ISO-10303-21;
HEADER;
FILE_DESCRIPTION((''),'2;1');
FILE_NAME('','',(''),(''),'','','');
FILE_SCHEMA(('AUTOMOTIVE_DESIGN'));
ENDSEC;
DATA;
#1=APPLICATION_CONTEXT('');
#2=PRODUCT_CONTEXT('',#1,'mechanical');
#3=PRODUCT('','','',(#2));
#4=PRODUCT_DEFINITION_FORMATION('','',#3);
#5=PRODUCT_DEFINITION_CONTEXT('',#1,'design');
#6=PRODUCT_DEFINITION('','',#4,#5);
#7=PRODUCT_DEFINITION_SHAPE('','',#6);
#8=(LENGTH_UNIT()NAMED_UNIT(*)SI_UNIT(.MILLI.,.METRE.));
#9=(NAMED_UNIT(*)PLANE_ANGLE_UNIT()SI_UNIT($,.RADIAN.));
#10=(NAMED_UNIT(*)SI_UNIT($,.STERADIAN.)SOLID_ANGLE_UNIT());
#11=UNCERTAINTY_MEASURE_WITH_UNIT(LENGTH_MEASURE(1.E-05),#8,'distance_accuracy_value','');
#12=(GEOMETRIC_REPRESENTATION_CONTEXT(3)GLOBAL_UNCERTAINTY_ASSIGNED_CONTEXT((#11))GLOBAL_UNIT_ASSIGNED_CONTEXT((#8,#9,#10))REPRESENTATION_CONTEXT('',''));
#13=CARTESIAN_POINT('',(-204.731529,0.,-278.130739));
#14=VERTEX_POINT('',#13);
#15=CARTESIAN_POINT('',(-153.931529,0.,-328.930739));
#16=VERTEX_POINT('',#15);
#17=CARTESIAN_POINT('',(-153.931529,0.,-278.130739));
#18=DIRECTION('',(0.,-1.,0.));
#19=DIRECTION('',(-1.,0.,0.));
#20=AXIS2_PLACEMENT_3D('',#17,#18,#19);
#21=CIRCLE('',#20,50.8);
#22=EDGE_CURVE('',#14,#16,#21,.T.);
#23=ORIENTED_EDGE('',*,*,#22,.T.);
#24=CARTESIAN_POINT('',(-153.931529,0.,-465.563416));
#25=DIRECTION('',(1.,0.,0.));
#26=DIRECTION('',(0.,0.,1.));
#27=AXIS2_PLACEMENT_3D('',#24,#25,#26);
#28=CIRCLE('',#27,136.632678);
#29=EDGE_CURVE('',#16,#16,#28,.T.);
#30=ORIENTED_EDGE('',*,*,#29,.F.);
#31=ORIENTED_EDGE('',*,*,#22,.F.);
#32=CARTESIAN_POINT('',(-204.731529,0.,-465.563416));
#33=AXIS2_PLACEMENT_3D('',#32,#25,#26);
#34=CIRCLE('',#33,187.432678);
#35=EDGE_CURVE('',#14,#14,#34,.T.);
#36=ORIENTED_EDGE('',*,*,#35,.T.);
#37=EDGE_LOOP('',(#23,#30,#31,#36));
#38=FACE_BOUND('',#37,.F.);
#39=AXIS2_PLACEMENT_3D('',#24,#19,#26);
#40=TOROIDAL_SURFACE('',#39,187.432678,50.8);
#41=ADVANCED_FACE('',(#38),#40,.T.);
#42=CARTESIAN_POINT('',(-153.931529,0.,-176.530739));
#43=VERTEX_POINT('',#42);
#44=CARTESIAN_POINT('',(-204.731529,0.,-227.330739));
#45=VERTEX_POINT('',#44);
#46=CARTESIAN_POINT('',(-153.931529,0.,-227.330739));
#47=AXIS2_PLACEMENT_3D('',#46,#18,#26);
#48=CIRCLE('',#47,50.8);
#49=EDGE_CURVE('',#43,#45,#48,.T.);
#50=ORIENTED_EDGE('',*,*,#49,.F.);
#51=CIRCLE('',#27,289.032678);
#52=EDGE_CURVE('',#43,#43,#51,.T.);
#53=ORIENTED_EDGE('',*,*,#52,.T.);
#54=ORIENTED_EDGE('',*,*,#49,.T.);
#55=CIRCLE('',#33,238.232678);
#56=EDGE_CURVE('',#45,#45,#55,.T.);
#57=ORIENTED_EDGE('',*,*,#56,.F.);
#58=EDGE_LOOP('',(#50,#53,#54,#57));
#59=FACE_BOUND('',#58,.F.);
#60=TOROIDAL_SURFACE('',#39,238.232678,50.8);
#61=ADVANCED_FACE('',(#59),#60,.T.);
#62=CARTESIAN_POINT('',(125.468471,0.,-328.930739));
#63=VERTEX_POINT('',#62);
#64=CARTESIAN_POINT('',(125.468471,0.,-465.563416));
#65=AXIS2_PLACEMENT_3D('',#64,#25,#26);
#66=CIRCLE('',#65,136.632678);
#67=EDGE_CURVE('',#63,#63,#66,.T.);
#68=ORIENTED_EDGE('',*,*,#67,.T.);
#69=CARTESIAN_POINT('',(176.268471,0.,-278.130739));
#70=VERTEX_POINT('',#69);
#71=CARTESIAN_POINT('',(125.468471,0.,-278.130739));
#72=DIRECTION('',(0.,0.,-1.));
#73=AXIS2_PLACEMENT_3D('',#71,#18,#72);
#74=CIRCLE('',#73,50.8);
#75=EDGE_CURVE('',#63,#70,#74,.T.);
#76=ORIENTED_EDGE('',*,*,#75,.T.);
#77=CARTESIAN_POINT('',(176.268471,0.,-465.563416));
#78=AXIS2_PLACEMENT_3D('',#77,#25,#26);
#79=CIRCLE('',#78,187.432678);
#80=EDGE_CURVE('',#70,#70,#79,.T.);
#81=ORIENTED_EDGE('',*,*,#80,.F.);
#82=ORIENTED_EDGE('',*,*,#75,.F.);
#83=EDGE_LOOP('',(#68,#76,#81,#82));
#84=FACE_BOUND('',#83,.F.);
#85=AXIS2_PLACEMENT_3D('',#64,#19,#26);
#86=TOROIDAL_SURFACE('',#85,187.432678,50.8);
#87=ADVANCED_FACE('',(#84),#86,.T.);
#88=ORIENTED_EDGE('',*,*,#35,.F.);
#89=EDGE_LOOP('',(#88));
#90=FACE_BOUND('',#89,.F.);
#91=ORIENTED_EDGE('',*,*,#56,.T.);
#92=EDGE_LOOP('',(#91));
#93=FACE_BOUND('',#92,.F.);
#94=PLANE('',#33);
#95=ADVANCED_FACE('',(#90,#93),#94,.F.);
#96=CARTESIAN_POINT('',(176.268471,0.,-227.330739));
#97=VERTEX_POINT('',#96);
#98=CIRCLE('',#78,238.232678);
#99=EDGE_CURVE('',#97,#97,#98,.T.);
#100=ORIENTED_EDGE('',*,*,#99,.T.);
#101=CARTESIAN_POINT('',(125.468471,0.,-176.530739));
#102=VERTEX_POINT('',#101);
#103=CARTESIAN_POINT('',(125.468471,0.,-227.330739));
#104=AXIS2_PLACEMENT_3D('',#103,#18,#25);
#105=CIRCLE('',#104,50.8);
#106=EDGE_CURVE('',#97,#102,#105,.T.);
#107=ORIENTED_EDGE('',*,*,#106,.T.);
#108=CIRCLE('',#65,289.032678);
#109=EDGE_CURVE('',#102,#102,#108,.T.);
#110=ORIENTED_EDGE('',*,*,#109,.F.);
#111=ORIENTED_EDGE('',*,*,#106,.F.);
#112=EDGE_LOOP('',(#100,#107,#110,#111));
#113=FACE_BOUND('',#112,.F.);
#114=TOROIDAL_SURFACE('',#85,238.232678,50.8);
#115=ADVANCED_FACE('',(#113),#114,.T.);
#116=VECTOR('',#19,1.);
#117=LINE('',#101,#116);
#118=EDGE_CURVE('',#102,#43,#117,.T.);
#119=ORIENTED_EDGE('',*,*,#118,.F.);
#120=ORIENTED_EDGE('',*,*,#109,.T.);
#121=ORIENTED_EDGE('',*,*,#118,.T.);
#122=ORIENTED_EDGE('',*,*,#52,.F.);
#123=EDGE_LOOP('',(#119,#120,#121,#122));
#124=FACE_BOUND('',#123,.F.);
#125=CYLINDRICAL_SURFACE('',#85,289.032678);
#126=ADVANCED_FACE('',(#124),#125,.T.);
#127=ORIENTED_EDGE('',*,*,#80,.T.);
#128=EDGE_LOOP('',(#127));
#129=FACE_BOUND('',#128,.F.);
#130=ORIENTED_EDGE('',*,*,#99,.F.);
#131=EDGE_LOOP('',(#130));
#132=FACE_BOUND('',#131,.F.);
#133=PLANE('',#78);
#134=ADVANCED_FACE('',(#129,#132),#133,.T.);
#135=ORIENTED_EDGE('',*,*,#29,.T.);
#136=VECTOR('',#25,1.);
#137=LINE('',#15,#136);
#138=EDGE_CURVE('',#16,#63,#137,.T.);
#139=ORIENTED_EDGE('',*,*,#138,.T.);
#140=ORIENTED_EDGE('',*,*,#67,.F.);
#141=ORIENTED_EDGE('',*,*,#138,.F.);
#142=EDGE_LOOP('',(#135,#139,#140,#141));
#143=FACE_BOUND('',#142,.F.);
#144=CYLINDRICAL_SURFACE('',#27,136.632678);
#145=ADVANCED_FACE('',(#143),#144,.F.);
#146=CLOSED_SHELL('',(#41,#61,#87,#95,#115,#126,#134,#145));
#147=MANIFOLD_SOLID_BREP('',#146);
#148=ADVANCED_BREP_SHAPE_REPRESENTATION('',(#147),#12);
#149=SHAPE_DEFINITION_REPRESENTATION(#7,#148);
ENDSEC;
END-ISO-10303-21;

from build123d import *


# Not quite as in the source:
# - the program builds the solid bodies; features that only make, move or delete a surface that nothing else refers to are left out


with BuildPart() as f3:
    # F0 (on Front) → F3 (revolve)
    with BuildSketch(Plane.XZ):
        with BuildLine():
            Line((125.4684708416, -176.5307388092), (-153.9315291584, -176.5307388092))
            ThreePointArc((-153.9315291584, -176.5307388092), (-189.8525536426, -191.409714325), (-204.7315291584, -227.3307388092))
            Line((-204.7315291584, -227.3307388092), (-204.7315291584, -278.1307388092))
            ThreePointArc((-204.7315291584, -278.1307388092), (-189.8525536426, -314.0517632935), (-153.9315291584, -328.9307388092))
            Line((-153.9315291584, -328.9307388092), (125.4684708416, -328.9307388092))
            ThreePointArc((125.4684708416, -328.9307388092), (161.3894953259, -314.0517632935), (176.2684708416, -278.1307388092))
            Line((176.2684708416, -278.1307388092), (176.2684708416, -227.3307388092))
            ThreePointArc((176.2684708416, -227.3307388092), (161.3894953259, -191.409714325), (125.4684708416, -176.5307388092))
        make_face()
    revolve(axis=Axis((3.1946003437, 0, -465.563416481), (1, 0, 0)))


solid = f3.part
